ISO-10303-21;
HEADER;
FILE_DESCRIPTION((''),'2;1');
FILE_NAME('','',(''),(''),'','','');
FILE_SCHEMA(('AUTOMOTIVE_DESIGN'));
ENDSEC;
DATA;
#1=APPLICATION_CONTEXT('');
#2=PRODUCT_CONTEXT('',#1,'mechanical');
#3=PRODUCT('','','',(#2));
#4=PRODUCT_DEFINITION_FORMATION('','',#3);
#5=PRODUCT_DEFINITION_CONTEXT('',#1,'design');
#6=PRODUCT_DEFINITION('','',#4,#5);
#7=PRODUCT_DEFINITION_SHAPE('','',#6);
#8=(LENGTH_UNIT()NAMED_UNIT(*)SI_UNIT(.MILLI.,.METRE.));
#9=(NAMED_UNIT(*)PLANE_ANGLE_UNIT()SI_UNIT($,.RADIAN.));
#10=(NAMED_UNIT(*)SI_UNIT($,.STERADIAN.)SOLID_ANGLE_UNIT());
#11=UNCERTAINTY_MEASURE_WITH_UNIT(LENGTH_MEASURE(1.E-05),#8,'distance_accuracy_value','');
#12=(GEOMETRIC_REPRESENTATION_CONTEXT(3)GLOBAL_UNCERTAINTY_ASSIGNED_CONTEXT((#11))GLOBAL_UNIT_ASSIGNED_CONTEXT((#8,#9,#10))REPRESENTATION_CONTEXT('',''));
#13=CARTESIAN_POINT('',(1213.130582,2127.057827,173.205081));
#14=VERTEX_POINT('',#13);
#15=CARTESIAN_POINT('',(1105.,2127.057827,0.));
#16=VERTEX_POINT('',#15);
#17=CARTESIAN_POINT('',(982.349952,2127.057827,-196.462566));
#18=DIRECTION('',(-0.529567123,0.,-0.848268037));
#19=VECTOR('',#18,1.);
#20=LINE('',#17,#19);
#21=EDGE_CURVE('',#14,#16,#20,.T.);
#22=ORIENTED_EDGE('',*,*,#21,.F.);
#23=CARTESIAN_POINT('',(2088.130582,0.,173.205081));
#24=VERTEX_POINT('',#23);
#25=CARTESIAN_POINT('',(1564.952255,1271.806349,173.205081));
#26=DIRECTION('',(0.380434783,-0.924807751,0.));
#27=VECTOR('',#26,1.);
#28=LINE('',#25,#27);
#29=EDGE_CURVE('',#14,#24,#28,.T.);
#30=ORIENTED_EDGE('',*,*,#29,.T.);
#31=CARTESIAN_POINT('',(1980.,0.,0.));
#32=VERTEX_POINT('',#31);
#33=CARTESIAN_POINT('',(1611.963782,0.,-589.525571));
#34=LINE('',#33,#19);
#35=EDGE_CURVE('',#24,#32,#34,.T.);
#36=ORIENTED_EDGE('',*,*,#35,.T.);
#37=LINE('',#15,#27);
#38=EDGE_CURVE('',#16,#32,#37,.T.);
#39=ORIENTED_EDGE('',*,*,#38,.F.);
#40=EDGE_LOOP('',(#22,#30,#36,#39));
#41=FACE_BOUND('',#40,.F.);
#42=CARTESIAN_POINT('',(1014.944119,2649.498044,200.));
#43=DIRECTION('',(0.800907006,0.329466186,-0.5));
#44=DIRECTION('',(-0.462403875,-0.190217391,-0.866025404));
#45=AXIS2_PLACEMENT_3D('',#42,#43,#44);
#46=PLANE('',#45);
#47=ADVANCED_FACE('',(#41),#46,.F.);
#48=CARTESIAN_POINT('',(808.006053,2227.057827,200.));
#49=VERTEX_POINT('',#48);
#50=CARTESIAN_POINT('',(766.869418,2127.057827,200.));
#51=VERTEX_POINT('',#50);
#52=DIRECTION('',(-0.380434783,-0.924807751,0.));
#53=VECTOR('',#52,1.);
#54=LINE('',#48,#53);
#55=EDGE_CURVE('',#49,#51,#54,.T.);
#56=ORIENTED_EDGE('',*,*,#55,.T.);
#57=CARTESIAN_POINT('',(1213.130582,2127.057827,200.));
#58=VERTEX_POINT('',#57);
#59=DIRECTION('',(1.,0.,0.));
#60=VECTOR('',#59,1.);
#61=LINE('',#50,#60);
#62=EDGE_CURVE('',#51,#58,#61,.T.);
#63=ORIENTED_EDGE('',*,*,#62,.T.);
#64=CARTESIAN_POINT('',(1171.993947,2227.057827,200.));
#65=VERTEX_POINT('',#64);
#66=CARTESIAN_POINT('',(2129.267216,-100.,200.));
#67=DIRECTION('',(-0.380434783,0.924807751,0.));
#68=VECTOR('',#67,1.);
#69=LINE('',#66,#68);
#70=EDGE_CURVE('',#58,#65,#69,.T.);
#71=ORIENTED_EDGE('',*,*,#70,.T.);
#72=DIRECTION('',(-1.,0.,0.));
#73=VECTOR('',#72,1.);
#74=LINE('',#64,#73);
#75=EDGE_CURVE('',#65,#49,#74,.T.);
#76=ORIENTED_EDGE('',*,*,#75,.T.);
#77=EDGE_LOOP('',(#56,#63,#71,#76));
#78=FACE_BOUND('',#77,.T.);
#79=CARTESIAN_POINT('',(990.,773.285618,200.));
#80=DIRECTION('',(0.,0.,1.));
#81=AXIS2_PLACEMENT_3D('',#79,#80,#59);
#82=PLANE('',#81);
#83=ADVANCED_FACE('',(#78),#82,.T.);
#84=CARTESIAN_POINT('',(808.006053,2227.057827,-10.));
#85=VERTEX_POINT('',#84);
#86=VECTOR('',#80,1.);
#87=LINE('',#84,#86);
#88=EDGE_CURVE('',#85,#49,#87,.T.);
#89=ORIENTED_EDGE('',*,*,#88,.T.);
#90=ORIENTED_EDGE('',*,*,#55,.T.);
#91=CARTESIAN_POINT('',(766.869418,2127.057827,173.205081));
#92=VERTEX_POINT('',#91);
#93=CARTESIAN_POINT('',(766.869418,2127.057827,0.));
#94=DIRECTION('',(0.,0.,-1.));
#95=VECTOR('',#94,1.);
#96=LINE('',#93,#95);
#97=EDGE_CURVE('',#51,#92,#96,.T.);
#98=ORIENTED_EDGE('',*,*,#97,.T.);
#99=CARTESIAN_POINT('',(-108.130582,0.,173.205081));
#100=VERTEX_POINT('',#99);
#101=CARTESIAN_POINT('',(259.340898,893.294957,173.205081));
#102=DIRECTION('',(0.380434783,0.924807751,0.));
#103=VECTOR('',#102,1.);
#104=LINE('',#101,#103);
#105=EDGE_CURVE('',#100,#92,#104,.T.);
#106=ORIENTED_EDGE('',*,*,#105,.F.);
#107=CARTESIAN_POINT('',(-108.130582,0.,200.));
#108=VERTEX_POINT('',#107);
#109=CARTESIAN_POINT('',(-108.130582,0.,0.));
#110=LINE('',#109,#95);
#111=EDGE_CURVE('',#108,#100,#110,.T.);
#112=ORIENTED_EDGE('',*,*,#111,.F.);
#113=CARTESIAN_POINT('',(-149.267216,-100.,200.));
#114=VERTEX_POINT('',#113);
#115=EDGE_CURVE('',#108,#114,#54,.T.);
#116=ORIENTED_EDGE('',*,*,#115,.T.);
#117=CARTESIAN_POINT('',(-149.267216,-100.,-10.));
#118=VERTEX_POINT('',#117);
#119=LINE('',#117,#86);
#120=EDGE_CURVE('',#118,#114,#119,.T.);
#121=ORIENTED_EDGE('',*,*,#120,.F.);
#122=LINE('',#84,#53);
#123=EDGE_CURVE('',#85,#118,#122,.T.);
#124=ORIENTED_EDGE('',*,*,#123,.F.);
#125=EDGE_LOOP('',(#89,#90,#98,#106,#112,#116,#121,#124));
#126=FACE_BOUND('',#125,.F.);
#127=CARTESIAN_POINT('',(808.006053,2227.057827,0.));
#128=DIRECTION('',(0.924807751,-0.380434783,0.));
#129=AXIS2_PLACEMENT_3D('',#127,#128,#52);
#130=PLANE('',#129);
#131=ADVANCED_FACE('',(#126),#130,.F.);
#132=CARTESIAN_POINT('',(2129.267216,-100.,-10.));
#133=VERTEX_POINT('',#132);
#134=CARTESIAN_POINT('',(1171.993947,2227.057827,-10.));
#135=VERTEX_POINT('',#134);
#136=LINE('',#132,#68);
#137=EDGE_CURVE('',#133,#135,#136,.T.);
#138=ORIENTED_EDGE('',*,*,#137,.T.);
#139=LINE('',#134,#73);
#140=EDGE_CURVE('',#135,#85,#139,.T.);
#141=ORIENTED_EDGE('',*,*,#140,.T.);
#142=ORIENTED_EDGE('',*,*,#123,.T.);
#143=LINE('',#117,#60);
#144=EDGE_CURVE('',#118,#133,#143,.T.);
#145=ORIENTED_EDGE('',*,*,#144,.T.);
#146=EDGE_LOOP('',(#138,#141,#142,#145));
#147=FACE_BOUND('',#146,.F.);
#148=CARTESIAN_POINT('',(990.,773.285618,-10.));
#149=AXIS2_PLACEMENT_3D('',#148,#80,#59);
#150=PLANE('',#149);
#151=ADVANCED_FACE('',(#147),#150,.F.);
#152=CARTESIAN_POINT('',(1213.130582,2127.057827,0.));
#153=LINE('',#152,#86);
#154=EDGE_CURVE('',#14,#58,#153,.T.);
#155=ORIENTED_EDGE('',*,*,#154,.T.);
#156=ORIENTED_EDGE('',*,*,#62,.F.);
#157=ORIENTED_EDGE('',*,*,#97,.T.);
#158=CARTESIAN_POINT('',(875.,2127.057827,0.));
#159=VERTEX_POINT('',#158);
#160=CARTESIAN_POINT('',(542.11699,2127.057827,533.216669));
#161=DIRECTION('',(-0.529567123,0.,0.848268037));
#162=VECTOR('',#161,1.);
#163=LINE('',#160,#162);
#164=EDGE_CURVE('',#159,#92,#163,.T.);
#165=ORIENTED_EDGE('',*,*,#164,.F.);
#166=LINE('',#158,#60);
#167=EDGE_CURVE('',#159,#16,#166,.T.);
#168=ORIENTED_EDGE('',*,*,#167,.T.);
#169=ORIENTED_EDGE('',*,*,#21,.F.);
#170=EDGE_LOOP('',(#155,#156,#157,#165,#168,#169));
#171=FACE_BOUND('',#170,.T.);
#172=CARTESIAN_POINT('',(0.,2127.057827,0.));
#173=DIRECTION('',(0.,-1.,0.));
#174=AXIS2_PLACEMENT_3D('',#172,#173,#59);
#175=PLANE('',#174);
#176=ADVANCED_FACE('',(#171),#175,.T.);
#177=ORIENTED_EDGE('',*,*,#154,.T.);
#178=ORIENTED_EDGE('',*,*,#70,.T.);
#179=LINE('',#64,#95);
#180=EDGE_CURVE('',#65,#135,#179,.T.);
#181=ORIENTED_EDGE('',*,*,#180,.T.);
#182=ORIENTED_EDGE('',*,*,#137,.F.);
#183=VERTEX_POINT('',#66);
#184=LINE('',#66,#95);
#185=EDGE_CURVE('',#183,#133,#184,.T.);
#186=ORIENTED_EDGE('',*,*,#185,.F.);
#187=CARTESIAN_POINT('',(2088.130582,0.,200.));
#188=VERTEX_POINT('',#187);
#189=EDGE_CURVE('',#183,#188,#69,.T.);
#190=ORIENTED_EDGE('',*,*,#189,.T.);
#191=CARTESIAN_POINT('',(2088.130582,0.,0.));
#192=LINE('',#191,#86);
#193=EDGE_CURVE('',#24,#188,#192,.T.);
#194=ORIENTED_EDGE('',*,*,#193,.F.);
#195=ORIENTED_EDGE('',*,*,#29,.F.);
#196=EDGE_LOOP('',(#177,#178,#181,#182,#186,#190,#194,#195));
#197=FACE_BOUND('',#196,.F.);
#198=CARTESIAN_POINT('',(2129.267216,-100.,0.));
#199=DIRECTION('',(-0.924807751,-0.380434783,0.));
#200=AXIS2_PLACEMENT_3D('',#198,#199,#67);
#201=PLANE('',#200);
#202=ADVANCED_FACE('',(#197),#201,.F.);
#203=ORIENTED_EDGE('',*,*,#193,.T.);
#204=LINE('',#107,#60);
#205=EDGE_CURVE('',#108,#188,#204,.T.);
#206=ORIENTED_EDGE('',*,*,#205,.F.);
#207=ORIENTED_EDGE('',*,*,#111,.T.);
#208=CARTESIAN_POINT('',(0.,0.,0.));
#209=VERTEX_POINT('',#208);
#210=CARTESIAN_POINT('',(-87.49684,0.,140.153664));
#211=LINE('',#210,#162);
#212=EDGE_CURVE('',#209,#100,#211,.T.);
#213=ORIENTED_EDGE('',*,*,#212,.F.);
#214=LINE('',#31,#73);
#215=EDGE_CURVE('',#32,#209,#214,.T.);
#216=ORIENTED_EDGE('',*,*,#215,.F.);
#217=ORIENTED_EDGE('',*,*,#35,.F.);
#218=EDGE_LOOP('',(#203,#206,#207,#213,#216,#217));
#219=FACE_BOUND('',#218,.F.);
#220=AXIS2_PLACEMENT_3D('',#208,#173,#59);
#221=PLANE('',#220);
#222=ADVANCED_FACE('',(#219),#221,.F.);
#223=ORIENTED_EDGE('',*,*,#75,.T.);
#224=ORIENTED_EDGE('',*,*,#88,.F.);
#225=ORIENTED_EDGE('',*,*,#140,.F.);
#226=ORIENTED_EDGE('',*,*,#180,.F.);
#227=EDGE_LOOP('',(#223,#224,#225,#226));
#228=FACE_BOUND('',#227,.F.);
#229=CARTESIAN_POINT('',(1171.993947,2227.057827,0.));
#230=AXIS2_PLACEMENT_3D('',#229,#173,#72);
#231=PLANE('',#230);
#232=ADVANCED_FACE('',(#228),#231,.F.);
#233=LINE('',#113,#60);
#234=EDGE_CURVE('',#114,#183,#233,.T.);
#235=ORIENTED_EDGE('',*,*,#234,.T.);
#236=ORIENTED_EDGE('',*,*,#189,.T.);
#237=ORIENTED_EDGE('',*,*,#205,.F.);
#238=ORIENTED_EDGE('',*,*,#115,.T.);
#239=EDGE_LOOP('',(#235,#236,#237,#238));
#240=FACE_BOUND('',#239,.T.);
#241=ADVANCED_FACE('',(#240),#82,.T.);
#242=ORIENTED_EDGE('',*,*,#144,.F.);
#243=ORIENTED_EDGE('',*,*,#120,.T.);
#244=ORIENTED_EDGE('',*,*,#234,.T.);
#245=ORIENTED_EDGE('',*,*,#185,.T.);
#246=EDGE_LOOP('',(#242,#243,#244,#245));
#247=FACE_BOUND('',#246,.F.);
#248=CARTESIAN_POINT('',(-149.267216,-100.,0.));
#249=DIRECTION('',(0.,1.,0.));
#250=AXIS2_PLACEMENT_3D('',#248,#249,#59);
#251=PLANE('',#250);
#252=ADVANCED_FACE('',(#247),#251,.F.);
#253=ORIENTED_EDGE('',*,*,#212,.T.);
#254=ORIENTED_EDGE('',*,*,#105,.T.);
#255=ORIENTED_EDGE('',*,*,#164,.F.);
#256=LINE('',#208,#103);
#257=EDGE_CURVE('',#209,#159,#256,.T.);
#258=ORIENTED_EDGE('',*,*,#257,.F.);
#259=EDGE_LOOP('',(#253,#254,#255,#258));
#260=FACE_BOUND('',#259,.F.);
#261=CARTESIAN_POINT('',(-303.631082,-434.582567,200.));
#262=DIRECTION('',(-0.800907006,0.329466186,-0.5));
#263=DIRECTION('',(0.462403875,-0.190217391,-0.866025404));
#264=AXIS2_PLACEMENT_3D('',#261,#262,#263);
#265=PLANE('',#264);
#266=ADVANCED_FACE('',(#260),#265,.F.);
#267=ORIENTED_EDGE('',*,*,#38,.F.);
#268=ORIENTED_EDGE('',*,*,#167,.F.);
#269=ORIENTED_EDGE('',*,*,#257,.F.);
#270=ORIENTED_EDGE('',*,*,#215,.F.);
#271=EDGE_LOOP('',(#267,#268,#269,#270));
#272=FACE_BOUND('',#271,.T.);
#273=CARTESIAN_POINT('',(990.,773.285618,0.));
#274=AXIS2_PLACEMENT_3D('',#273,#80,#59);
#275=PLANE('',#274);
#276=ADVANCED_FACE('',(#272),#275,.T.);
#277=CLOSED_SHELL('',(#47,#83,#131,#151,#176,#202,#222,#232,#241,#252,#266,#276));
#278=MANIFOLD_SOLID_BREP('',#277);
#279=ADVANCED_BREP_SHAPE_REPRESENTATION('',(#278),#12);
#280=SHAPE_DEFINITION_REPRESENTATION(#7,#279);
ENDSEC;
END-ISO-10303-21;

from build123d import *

# Parameters (mm, degrees)
F1_DEPTH     = 9.9999997765
F3_DEPTH     = 200
F4_T4_DEPTH  = 3334.8343018584
F4_T10_DEPTH = 3334.8343018584


# Not quite as in the source:
# - a fillet or chamfer that OpenCascade refuses, or shapes differently, is made with other operations: its cross-section is extruded or revolved along the edge and cut away or added


with BuildPart() as f1:
    # F0 (on Top) → F1 (new body)
    with BuildSketch(Plane.XY):
        Polygon((808.0060526885, 2227.0578271406), (-149.2672159397, -100), (2129.2672159397, -100), (1171.9939473115, 2227.0578271406), align=None)
        Polygon((1980, 0), (0, 0), (875, 2127.0578271406), (1105, 2127.0578271406), align=None, mode=Mode.SUBTRACT)
        Polygon((875, 2127.0578271406), (0, 0), (1980, 0), (1105, 2127.0578271406), align=None)
    extrude(amount=-F1_DEPTH)

    # F2 (on face) → F3 (join)
    with BuildSketch(Plane.XY):
        Polygon((1171.9939473115, 2227.0578271406), (808.0060526885, 2227.0578271406), (-149.2672159397, -100), (2129.2672159397, -100), align=None)
        Polygon((1980, 0), (0, 0), (875, 2127.0578271406), (1105, 2127.0578271406), align=None, mode=Mode.SUBTRACT)
    extrude(amount=F3_DEPTH)

    # F4: chamfer of 200 x 115.4700538379 on 2 edges, made by hand


with BuildPart() as f4_tool2:
    # F4_s3 → F4_t4 (new body)
    with BuildSketch(Plane(origin=(-196.8434813318, -478.5113916438, 0), x_dir=(0, 0, 1), z_dir=(0.3804347826, 0.9248077509, 0))):
        Polygon((200, -115.4700538379), (0, 0), (200, 0), align=None)
    extrude(amount=F4_T4_DEPTH)

    split(bisect_by=Plane.XZ.offset(-2127.0578271406), keep=Keep.TOP)

    split(bisect_by=Plane.XZ, keep=Keep.BOTTOM)


with BuildPart() as f1_1:
    add(f1.part)

    # F4_t1: cut F4_tool2
    add(f4_tool2.part, mode=Mode.SUBTRACT)


with BuildPart() as f4_tool8:
    # F4_s9 → F4_t10 (new body)
    with BuildSketch(Plane(origin=(-785.2768461711, 1908.9477281377, 0), x_dir=(0, 0, 1), z_dir=(0.3804347826, -0.9248077509, 0))):
        Polygon((200, -1946.5894006807), (0, -1831.1193468428), (200, -1831.1193468428), align=None)
    extrude(amount=F4_T10_DEPTH)

    split(bisect_by=Plane.XZ.offset(-2127.0578271406), keep=Keep.TOP)

    split(bisect_by=Plane.XZ, keep=Keep.BOTTOM)


with BuildPart() as f1_2:
    add(f1_1.part)

    # F4_t7: cut F4_tool8
    add(f4_tool8.part, mode=Mode.SUBTRACT)


solid = f1_2.part
